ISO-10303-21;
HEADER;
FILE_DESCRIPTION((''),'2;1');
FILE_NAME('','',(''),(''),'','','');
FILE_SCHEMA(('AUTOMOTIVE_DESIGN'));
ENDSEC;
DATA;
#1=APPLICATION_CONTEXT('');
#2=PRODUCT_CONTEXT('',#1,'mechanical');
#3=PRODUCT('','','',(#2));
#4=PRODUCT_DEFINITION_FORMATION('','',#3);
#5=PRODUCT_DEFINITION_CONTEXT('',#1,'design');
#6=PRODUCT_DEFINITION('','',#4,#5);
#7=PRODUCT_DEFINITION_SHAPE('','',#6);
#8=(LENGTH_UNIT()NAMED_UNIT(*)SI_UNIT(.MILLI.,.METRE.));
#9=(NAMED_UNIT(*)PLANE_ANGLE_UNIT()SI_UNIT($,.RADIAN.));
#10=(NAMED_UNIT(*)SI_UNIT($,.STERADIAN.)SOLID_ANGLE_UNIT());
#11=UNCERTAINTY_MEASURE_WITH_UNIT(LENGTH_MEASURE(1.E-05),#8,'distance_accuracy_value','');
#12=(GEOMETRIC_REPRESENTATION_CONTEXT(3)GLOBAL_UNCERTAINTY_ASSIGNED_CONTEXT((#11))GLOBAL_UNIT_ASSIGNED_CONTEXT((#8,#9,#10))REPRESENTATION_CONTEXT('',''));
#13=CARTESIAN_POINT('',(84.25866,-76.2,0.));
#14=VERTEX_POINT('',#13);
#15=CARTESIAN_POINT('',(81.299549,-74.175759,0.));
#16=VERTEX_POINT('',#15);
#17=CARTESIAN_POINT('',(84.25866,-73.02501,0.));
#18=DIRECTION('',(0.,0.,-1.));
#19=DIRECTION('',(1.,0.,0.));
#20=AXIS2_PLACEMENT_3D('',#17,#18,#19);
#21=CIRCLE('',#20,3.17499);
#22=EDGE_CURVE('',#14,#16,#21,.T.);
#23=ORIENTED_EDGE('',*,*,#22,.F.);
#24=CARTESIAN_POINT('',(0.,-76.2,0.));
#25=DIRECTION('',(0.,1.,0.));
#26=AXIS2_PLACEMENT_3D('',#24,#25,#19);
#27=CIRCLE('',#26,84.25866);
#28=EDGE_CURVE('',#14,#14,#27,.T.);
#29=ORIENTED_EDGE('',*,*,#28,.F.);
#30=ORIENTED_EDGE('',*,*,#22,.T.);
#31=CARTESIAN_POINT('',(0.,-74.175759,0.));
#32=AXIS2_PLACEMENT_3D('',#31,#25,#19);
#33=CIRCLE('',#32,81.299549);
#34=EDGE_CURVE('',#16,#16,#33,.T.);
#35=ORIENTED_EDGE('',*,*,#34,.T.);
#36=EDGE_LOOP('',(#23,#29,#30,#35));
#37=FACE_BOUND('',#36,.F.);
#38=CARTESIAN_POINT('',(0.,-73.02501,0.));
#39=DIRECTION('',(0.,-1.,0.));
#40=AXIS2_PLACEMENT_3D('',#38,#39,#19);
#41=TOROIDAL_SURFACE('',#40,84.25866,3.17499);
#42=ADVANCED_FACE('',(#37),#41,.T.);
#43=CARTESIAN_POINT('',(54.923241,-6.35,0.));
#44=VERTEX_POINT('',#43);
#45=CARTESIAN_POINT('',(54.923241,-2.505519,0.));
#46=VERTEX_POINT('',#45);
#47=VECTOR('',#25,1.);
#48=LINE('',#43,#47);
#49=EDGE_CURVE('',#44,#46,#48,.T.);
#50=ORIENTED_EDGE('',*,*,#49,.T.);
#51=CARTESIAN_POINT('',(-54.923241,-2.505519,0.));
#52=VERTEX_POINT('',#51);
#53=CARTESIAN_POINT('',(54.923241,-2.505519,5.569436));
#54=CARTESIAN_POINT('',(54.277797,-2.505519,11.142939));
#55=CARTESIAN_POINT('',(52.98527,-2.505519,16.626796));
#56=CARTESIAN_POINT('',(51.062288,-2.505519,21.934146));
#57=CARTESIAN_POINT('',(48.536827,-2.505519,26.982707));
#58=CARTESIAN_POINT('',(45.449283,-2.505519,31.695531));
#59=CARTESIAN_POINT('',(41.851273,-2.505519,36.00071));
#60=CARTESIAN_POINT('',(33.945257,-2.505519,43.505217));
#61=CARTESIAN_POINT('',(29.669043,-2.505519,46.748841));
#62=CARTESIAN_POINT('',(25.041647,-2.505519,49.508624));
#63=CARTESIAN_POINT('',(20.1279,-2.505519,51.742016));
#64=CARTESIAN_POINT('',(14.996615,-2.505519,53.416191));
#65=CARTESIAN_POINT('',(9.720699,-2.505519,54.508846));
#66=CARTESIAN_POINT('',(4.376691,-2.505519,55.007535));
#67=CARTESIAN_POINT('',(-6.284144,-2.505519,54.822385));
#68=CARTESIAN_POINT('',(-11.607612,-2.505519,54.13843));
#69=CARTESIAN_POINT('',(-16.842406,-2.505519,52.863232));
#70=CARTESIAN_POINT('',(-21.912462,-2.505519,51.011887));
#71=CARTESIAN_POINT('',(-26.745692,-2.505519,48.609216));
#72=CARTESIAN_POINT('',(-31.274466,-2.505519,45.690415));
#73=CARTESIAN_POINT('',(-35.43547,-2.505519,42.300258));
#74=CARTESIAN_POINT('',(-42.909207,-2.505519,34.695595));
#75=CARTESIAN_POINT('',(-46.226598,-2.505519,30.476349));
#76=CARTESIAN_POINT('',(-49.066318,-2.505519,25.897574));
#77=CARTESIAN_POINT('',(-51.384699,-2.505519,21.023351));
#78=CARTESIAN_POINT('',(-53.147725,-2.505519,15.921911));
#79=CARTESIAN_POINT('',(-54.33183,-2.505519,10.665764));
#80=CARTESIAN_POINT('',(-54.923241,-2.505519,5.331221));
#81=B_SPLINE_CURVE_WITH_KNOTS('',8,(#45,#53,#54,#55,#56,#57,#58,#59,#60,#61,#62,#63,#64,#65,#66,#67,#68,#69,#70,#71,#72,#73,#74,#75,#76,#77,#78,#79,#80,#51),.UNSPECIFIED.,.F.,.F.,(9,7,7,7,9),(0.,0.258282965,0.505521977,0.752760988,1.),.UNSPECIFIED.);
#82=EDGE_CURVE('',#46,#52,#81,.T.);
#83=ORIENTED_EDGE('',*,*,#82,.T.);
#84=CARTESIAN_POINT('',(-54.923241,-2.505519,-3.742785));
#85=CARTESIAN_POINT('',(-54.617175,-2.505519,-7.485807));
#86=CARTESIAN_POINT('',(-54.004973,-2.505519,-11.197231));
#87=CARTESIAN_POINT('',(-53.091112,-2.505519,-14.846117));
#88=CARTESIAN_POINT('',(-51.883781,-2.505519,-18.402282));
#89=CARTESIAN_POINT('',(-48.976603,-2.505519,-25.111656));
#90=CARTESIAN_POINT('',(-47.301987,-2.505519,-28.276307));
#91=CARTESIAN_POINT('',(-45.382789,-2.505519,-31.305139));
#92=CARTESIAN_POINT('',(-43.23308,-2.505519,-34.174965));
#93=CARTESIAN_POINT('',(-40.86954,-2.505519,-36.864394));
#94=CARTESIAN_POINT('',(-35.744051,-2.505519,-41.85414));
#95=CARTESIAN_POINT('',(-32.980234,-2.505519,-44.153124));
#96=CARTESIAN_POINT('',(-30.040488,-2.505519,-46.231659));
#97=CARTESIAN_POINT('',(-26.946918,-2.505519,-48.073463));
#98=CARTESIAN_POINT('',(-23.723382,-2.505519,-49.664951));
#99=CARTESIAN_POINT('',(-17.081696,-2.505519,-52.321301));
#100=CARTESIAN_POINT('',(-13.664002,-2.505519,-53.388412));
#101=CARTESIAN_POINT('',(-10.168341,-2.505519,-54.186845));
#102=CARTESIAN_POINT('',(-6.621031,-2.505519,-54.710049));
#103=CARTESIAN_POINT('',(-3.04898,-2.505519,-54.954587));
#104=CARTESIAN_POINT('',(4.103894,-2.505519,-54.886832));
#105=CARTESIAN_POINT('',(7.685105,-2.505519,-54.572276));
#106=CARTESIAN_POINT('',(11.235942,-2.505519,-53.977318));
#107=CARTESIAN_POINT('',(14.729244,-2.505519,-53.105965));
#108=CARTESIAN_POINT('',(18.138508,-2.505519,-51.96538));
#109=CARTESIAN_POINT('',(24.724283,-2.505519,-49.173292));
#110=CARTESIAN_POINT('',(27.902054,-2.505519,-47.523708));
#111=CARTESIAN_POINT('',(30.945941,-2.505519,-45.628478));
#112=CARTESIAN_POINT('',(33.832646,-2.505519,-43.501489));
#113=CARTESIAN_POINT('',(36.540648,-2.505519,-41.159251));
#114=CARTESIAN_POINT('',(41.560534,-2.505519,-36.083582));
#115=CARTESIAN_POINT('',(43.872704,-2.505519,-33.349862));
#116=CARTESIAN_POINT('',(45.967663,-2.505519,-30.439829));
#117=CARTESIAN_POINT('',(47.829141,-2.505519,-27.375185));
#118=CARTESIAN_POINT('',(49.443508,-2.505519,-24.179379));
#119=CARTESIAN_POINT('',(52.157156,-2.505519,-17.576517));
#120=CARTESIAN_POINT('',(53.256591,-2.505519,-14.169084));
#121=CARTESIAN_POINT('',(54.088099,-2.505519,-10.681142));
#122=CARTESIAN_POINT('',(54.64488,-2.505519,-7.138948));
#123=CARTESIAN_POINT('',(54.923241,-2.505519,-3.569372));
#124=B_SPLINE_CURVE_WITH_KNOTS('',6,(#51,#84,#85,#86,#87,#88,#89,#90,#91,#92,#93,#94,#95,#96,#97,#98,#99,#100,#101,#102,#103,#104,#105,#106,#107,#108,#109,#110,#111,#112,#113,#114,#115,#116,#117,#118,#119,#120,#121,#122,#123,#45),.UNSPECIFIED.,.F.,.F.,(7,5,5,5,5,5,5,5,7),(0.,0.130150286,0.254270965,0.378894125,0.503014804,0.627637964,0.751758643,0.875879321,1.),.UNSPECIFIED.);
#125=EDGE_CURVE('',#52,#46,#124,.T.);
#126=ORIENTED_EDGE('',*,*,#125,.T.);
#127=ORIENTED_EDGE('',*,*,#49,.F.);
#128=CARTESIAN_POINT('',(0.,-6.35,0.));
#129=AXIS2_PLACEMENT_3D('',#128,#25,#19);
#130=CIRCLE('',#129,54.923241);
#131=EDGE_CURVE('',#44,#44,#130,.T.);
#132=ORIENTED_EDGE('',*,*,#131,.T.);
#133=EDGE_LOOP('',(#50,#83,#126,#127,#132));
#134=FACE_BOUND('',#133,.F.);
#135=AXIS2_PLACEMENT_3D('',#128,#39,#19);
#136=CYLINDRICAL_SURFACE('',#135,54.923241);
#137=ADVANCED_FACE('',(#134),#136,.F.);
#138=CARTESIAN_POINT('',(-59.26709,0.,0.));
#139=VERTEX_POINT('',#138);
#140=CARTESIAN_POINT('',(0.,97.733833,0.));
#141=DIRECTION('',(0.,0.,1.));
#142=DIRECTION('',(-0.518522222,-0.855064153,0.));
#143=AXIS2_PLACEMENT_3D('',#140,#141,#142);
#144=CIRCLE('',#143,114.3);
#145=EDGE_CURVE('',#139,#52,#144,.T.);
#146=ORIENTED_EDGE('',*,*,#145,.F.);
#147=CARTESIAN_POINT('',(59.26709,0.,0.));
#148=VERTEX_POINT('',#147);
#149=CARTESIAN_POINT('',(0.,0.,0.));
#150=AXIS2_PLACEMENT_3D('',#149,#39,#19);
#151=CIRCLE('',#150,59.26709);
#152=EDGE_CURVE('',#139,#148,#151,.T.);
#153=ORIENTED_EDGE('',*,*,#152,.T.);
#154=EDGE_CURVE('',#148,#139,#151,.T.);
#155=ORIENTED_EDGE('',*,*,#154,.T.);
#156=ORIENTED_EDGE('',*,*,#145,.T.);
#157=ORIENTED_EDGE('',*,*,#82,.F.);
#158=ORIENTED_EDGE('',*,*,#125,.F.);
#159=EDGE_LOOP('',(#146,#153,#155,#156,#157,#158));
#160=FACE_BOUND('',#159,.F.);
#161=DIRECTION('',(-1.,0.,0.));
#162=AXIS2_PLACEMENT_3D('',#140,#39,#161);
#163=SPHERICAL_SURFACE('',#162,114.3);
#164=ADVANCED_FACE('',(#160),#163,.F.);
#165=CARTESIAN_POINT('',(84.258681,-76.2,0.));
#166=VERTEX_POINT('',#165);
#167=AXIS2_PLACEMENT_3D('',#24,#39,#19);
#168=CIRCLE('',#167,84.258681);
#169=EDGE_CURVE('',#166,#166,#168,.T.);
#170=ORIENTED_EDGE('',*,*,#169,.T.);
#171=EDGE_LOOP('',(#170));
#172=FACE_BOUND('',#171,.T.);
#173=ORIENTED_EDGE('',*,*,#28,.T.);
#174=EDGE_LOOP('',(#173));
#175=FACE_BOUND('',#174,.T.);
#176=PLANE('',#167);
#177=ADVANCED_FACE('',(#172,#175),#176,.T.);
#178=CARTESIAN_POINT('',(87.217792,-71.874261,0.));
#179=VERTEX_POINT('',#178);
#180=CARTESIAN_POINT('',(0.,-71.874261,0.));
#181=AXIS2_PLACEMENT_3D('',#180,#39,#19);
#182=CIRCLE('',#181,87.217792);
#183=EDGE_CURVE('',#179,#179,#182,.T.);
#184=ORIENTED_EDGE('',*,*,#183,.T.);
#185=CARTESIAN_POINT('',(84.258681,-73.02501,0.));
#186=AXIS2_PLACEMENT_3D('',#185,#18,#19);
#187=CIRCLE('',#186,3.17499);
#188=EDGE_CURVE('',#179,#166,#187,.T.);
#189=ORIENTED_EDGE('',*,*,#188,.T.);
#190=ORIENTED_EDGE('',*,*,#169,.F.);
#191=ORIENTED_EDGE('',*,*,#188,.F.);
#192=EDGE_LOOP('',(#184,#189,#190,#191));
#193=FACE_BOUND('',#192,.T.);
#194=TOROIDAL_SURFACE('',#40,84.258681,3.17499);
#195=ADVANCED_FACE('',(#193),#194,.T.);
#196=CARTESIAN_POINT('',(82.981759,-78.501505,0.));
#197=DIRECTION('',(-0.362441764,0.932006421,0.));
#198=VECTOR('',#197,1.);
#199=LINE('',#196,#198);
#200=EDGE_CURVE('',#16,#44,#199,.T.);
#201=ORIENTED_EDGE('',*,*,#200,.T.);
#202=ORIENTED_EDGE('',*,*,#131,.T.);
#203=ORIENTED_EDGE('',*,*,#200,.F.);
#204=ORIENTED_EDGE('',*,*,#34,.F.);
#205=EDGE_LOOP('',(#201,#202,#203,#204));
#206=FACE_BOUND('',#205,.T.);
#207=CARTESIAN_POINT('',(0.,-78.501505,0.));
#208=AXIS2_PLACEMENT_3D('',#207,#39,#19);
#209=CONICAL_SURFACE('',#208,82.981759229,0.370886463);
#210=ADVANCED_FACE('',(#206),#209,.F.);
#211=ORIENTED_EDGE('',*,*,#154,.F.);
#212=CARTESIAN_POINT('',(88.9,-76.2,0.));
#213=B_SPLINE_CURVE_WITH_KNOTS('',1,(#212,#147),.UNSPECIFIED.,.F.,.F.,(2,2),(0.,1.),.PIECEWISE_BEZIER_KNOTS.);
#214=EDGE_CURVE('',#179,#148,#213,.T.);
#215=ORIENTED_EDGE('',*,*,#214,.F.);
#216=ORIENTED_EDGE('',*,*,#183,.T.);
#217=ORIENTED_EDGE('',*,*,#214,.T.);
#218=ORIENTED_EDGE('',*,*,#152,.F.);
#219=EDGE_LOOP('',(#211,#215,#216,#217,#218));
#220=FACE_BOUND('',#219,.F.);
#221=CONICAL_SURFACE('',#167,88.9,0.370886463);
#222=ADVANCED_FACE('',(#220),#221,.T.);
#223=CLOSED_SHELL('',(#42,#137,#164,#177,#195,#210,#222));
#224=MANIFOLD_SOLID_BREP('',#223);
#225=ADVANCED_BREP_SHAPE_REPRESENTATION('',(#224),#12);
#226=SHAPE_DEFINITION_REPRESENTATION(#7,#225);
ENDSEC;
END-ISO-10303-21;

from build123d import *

# Parameters (mm, degrees)
F2_R     = 88.9
F0_R     = 59.26709
F4_T     = -6.35
F5_R     = 54.9232413826
F6_DEPTH = 6.3510001
F7_R     = 3.17499


# Not quite as in the source:
# - a fillet or chamfer is up to 0.001 mm smaller than in the source, because OpenCascade refuses the exact size


with BuildPart() as f3:
    # F2 (on offset) → F3 section 0
    with BuildSketch(Plane.XZ.offset(76.2)):
        Circle(F2_R)
    # F0 (on Front) → F3 section 1
    with BuildSketch(Plane.XZ):
        Circle(F0_R)
    loft()

    # F4
    f4_openings = [f3.faces().sort_by_distance(p)[0] for p in [
        (0, -76.2, 0),
    ]]
    offset(amount=F4_T, openings=f4_openings, kind=Kind.INTERSECTION)

    # F5 (on face) → F6 (cut, through all)
    with BuildSketch(Plane.XZ.offset(6.35)):
        Circle(F5_R)
    extrude(amount=-F6_DEPTH, mode=Mode.SUBTRACT)

    # F7 (radius 3.175 in the source; OpenCascade refuses exactly that, so slightly less here)
    f7_edges = [f3.edges().sort_by_distance(p)[0] for p in [
        (-88.9, -76.2, 0),
        (-82.086742, -76.2, 0),
    ]]
    fillet(f7_edges, radius=F7_R)

    # F8 (on Top) → F9 (revolve, cut)
    with BuildSketch(Plane.XY):
        with BuildLine():
            Line((0, 0), (-59.26709, 0))
            ThreePointArc((-59.26709, 0), (-30.7694079322, -12.346744825), (0, -16.5661673578))
            Line((0, -16.5661673578), (0, 0))
        make_face()
    revolve(axis=Axis((0, -8.2830836789, 0), (0, -1, 0)), mode=Mode.SUBTRACT)


solid = f3.part
